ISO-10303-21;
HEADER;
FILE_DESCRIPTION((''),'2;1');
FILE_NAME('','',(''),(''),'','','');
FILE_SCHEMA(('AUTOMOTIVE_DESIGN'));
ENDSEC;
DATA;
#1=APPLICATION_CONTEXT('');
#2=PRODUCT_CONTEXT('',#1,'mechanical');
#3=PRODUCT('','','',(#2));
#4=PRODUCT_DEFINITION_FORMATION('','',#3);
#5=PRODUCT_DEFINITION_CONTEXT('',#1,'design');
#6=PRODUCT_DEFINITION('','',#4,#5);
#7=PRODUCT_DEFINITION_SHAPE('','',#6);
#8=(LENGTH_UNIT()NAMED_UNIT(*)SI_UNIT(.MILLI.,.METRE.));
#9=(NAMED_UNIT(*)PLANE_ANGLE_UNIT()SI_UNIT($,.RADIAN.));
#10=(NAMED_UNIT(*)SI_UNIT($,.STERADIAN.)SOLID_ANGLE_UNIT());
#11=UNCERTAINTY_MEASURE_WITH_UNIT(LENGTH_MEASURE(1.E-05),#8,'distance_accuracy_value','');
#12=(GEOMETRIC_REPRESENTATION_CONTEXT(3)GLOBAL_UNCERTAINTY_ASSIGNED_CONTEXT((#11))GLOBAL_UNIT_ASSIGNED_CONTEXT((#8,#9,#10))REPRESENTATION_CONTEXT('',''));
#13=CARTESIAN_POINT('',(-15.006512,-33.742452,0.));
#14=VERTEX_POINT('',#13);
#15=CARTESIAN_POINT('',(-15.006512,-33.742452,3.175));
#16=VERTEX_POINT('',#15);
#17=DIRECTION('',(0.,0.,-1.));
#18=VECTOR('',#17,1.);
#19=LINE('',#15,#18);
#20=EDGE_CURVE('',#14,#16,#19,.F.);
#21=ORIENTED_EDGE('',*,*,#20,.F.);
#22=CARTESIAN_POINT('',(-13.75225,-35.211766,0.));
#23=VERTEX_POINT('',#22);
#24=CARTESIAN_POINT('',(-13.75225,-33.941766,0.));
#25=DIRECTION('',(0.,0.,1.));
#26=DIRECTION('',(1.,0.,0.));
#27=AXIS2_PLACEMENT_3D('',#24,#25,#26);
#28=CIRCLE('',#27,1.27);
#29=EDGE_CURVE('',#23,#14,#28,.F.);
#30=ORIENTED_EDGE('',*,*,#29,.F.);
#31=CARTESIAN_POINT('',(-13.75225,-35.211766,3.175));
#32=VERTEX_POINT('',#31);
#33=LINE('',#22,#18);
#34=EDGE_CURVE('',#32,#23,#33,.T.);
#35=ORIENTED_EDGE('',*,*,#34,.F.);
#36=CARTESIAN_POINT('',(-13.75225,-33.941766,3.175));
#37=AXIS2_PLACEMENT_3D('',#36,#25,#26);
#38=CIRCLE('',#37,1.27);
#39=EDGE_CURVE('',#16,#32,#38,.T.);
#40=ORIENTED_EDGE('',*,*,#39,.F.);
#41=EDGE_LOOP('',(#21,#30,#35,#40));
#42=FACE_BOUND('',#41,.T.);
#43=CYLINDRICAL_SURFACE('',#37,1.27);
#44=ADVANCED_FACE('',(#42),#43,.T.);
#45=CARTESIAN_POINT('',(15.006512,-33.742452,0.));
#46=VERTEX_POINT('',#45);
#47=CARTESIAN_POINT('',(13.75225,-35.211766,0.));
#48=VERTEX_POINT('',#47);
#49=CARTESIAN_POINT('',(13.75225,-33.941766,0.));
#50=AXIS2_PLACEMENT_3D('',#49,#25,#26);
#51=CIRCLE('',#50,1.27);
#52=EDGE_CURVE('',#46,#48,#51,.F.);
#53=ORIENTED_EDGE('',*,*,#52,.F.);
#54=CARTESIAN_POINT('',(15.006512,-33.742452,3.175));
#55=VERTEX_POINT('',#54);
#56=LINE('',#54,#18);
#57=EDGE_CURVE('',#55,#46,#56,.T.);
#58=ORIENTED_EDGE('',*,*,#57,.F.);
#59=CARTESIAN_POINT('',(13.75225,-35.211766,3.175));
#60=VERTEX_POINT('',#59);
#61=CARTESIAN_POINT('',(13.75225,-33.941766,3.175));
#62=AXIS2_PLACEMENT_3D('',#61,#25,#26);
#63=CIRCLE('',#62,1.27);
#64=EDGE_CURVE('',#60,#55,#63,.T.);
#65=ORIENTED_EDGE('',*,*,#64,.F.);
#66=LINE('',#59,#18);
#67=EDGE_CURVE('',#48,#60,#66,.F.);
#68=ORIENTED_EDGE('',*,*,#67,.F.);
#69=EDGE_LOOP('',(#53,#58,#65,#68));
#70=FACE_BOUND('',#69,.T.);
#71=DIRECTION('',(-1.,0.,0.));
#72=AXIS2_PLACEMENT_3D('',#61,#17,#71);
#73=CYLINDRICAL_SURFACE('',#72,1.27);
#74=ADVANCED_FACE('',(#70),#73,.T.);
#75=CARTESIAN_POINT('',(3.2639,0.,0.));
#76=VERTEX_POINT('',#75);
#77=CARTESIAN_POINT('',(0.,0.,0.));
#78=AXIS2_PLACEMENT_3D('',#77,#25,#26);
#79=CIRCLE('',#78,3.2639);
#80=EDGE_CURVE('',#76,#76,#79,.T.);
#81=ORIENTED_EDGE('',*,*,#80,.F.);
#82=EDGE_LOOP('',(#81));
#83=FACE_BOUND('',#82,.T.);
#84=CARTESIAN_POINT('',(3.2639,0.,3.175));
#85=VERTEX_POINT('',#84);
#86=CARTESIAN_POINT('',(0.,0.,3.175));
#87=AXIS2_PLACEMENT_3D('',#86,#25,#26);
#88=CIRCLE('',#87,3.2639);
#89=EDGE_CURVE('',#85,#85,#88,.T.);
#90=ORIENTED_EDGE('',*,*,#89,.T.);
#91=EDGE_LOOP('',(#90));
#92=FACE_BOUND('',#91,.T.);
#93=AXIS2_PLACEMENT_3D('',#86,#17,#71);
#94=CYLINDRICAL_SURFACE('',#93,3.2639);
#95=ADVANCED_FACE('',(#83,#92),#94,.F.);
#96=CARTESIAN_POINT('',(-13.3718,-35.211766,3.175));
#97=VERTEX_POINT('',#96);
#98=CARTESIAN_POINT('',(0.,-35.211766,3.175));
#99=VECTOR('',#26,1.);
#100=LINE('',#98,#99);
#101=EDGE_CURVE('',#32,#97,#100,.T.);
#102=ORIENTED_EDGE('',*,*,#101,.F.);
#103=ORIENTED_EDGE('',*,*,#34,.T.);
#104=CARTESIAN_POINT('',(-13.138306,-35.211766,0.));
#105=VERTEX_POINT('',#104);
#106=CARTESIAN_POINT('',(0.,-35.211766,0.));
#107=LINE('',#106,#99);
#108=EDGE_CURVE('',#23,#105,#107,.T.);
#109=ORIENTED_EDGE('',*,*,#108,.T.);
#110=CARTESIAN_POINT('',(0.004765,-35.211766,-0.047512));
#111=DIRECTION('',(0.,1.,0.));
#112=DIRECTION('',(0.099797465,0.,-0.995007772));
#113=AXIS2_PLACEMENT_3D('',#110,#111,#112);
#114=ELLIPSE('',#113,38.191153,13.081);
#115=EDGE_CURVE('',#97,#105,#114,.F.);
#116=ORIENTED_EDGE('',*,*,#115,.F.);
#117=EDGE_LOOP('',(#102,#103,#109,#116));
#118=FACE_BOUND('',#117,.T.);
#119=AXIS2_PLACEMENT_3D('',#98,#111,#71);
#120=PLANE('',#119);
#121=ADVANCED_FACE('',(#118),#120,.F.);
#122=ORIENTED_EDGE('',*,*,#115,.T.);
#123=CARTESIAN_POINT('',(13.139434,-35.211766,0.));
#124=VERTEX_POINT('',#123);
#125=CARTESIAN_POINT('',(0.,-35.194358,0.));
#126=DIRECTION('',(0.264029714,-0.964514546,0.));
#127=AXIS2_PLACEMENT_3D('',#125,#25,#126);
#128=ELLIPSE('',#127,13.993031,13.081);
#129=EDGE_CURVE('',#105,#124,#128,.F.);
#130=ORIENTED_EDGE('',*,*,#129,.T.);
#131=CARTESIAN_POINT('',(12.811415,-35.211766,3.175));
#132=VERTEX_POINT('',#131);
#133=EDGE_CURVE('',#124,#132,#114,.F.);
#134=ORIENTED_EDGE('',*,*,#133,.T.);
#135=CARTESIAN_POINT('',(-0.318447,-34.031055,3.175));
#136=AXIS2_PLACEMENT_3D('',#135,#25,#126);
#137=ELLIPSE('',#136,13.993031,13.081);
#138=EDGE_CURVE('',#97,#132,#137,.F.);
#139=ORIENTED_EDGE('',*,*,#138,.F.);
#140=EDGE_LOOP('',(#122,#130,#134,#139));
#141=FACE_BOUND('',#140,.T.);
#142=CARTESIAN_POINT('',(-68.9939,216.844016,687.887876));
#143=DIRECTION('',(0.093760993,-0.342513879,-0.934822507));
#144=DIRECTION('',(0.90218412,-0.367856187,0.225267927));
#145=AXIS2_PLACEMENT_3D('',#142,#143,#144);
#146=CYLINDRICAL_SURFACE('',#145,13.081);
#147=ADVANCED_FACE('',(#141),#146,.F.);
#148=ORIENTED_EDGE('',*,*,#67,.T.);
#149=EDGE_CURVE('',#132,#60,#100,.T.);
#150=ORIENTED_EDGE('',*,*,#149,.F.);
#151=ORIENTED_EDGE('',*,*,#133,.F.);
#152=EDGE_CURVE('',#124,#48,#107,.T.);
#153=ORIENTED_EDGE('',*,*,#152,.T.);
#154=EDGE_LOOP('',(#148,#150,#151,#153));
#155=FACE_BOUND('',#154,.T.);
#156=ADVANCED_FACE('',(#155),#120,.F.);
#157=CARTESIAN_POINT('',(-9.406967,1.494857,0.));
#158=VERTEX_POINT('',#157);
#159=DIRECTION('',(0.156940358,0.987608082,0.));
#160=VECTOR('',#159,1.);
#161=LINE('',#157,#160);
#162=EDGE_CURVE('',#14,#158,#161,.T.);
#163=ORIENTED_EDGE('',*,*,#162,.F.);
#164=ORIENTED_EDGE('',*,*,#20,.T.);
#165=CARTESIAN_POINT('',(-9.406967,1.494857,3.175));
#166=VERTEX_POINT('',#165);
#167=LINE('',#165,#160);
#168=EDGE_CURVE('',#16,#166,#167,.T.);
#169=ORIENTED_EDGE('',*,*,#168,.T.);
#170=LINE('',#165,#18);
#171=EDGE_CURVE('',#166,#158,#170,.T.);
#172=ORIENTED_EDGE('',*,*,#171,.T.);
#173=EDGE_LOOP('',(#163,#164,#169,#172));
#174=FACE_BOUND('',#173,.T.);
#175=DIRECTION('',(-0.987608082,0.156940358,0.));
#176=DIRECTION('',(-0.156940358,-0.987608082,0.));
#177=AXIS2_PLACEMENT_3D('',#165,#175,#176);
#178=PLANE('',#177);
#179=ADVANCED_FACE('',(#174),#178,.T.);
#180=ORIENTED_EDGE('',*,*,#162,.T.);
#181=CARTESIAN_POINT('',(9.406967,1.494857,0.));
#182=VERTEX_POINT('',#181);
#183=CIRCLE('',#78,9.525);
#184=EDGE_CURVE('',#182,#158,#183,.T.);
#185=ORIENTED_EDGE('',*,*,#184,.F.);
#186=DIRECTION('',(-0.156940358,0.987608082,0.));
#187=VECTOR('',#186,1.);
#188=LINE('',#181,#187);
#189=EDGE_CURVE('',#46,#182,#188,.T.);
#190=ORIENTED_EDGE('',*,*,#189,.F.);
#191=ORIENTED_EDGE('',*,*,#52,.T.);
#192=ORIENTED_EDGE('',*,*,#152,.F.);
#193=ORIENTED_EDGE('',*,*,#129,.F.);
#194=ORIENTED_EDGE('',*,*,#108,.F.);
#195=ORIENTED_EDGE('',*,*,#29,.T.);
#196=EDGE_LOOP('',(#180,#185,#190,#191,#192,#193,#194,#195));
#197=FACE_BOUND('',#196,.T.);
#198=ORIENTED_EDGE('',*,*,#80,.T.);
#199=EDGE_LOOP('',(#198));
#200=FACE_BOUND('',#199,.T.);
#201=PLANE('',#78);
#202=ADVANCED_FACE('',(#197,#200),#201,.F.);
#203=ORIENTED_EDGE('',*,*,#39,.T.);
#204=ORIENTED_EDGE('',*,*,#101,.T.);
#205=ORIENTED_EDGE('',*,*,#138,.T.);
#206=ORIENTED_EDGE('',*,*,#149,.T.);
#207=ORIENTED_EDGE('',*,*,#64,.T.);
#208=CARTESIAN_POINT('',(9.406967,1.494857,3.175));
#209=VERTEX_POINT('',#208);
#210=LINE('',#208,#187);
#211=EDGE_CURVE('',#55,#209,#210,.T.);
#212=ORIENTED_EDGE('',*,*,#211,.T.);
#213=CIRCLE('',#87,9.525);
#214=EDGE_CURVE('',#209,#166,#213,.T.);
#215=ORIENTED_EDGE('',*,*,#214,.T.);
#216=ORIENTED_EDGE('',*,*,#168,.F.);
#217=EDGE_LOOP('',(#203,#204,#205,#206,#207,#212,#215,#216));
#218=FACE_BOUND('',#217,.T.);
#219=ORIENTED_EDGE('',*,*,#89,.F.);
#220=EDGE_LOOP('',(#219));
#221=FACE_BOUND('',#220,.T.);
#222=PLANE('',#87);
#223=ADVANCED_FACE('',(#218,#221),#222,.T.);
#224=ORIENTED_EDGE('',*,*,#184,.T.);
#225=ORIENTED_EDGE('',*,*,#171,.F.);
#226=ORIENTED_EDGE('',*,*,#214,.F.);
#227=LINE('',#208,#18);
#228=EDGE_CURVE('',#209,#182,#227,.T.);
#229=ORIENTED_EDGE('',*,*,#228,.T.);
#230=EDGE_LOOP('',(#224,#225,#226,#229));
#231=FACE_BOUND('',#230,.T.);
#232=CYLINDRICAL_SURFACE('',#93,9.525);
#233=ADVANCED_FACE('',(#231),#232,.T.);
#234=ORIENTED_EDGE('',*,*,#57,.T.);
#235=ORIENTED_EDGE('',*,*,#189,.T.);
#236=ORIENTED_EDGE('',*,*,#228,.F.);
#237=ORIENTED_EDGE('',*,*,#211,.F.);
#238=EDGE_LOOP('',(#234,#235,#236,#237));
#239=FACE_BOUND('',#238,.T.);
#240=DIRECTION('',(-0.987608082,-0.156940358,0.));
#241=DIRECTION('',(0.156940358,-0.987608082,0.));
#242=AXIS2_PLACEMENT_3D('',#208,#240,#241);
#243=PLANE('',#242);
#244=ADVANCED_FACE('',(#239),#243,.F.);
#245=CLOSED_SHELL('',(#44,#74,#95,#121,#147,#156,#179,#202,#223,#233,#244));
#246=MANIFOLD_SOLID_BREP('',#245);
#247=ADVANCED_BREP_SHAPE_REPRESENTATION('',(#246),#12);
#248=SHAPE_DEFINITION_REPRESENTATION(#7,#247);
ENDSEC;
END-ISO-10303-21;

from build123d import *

# Parameters (mm, degrees)
SKETCH1_R           = 3.2639
BOSS_EXTRUDE1_DEPTH = 3.175
CAVITY1_START       = 3.689049998
CAVITY1_DEPTH       = 9.603434939
FILLET3_R           = 1.27


# Read off the part's stored shape, not the designer's step: Cavity1
with BuildPart() as part:
    # Sketch1 → Boss-Extrude1 (new body)
    with BuildSketch(Plane.XY):
        with BuildLine():
            ThreePointArc((9.406966983, 1.494856913), (0, 9.525), (-9.406966983, 1.494856913))
            Line((-9.406966983, 1.494856913), (-15.24, -35.211766))
            Line((-15.24, -35.211766), (15.24, -35.211766))
            Line((15.24, -35.211766), (9.406966983, 1.494856913))
        make_face()
        Circle(SKETCH1_R, mode=Mode.SUBTRACT)
    extrude(amount=BOSS_EXTRUDE1_DEPTH)

    # Cavity1 outline → Cavity1 (cut)
    with BuildSketch(Plane(origin=(0, 0, 0), x_dir=(0.9955947349362284, 0.032256539947670526, 0.08803771576924041), z_dir=(0.09376099278090663, -0.3425138790307331, -0.9348225066311033)).offset(CAVITY1_START)):
        with BuildLine():
            Line((-14.012226084, 36), (-14.169183947, 34.154693399))
            ThreePointArc((-14.169183947, 34.154693399), (-1.135248211, 19.965054491), (11.898687525, 34.154693399))
            Line((11.898687525, 34.154693399), (11.741729662, 36))
            Line((11.741729662, 36), (-14.012226084, 36))
        make_face()
    extrude(amount=CAVITY1_DEPTH, mode=Mode.SUBTRACT)

    # Fillet3
    fillet3_edges = [part.edges().sort_by_distance(p)[0] for p in [
        (-15.24, -35.211766, 1.5875),
        (15.24, -35.211766, 1.5875),
    ]]
    fillet(fillet3_edges, radius=FILLET3_R)


solid = part.part
